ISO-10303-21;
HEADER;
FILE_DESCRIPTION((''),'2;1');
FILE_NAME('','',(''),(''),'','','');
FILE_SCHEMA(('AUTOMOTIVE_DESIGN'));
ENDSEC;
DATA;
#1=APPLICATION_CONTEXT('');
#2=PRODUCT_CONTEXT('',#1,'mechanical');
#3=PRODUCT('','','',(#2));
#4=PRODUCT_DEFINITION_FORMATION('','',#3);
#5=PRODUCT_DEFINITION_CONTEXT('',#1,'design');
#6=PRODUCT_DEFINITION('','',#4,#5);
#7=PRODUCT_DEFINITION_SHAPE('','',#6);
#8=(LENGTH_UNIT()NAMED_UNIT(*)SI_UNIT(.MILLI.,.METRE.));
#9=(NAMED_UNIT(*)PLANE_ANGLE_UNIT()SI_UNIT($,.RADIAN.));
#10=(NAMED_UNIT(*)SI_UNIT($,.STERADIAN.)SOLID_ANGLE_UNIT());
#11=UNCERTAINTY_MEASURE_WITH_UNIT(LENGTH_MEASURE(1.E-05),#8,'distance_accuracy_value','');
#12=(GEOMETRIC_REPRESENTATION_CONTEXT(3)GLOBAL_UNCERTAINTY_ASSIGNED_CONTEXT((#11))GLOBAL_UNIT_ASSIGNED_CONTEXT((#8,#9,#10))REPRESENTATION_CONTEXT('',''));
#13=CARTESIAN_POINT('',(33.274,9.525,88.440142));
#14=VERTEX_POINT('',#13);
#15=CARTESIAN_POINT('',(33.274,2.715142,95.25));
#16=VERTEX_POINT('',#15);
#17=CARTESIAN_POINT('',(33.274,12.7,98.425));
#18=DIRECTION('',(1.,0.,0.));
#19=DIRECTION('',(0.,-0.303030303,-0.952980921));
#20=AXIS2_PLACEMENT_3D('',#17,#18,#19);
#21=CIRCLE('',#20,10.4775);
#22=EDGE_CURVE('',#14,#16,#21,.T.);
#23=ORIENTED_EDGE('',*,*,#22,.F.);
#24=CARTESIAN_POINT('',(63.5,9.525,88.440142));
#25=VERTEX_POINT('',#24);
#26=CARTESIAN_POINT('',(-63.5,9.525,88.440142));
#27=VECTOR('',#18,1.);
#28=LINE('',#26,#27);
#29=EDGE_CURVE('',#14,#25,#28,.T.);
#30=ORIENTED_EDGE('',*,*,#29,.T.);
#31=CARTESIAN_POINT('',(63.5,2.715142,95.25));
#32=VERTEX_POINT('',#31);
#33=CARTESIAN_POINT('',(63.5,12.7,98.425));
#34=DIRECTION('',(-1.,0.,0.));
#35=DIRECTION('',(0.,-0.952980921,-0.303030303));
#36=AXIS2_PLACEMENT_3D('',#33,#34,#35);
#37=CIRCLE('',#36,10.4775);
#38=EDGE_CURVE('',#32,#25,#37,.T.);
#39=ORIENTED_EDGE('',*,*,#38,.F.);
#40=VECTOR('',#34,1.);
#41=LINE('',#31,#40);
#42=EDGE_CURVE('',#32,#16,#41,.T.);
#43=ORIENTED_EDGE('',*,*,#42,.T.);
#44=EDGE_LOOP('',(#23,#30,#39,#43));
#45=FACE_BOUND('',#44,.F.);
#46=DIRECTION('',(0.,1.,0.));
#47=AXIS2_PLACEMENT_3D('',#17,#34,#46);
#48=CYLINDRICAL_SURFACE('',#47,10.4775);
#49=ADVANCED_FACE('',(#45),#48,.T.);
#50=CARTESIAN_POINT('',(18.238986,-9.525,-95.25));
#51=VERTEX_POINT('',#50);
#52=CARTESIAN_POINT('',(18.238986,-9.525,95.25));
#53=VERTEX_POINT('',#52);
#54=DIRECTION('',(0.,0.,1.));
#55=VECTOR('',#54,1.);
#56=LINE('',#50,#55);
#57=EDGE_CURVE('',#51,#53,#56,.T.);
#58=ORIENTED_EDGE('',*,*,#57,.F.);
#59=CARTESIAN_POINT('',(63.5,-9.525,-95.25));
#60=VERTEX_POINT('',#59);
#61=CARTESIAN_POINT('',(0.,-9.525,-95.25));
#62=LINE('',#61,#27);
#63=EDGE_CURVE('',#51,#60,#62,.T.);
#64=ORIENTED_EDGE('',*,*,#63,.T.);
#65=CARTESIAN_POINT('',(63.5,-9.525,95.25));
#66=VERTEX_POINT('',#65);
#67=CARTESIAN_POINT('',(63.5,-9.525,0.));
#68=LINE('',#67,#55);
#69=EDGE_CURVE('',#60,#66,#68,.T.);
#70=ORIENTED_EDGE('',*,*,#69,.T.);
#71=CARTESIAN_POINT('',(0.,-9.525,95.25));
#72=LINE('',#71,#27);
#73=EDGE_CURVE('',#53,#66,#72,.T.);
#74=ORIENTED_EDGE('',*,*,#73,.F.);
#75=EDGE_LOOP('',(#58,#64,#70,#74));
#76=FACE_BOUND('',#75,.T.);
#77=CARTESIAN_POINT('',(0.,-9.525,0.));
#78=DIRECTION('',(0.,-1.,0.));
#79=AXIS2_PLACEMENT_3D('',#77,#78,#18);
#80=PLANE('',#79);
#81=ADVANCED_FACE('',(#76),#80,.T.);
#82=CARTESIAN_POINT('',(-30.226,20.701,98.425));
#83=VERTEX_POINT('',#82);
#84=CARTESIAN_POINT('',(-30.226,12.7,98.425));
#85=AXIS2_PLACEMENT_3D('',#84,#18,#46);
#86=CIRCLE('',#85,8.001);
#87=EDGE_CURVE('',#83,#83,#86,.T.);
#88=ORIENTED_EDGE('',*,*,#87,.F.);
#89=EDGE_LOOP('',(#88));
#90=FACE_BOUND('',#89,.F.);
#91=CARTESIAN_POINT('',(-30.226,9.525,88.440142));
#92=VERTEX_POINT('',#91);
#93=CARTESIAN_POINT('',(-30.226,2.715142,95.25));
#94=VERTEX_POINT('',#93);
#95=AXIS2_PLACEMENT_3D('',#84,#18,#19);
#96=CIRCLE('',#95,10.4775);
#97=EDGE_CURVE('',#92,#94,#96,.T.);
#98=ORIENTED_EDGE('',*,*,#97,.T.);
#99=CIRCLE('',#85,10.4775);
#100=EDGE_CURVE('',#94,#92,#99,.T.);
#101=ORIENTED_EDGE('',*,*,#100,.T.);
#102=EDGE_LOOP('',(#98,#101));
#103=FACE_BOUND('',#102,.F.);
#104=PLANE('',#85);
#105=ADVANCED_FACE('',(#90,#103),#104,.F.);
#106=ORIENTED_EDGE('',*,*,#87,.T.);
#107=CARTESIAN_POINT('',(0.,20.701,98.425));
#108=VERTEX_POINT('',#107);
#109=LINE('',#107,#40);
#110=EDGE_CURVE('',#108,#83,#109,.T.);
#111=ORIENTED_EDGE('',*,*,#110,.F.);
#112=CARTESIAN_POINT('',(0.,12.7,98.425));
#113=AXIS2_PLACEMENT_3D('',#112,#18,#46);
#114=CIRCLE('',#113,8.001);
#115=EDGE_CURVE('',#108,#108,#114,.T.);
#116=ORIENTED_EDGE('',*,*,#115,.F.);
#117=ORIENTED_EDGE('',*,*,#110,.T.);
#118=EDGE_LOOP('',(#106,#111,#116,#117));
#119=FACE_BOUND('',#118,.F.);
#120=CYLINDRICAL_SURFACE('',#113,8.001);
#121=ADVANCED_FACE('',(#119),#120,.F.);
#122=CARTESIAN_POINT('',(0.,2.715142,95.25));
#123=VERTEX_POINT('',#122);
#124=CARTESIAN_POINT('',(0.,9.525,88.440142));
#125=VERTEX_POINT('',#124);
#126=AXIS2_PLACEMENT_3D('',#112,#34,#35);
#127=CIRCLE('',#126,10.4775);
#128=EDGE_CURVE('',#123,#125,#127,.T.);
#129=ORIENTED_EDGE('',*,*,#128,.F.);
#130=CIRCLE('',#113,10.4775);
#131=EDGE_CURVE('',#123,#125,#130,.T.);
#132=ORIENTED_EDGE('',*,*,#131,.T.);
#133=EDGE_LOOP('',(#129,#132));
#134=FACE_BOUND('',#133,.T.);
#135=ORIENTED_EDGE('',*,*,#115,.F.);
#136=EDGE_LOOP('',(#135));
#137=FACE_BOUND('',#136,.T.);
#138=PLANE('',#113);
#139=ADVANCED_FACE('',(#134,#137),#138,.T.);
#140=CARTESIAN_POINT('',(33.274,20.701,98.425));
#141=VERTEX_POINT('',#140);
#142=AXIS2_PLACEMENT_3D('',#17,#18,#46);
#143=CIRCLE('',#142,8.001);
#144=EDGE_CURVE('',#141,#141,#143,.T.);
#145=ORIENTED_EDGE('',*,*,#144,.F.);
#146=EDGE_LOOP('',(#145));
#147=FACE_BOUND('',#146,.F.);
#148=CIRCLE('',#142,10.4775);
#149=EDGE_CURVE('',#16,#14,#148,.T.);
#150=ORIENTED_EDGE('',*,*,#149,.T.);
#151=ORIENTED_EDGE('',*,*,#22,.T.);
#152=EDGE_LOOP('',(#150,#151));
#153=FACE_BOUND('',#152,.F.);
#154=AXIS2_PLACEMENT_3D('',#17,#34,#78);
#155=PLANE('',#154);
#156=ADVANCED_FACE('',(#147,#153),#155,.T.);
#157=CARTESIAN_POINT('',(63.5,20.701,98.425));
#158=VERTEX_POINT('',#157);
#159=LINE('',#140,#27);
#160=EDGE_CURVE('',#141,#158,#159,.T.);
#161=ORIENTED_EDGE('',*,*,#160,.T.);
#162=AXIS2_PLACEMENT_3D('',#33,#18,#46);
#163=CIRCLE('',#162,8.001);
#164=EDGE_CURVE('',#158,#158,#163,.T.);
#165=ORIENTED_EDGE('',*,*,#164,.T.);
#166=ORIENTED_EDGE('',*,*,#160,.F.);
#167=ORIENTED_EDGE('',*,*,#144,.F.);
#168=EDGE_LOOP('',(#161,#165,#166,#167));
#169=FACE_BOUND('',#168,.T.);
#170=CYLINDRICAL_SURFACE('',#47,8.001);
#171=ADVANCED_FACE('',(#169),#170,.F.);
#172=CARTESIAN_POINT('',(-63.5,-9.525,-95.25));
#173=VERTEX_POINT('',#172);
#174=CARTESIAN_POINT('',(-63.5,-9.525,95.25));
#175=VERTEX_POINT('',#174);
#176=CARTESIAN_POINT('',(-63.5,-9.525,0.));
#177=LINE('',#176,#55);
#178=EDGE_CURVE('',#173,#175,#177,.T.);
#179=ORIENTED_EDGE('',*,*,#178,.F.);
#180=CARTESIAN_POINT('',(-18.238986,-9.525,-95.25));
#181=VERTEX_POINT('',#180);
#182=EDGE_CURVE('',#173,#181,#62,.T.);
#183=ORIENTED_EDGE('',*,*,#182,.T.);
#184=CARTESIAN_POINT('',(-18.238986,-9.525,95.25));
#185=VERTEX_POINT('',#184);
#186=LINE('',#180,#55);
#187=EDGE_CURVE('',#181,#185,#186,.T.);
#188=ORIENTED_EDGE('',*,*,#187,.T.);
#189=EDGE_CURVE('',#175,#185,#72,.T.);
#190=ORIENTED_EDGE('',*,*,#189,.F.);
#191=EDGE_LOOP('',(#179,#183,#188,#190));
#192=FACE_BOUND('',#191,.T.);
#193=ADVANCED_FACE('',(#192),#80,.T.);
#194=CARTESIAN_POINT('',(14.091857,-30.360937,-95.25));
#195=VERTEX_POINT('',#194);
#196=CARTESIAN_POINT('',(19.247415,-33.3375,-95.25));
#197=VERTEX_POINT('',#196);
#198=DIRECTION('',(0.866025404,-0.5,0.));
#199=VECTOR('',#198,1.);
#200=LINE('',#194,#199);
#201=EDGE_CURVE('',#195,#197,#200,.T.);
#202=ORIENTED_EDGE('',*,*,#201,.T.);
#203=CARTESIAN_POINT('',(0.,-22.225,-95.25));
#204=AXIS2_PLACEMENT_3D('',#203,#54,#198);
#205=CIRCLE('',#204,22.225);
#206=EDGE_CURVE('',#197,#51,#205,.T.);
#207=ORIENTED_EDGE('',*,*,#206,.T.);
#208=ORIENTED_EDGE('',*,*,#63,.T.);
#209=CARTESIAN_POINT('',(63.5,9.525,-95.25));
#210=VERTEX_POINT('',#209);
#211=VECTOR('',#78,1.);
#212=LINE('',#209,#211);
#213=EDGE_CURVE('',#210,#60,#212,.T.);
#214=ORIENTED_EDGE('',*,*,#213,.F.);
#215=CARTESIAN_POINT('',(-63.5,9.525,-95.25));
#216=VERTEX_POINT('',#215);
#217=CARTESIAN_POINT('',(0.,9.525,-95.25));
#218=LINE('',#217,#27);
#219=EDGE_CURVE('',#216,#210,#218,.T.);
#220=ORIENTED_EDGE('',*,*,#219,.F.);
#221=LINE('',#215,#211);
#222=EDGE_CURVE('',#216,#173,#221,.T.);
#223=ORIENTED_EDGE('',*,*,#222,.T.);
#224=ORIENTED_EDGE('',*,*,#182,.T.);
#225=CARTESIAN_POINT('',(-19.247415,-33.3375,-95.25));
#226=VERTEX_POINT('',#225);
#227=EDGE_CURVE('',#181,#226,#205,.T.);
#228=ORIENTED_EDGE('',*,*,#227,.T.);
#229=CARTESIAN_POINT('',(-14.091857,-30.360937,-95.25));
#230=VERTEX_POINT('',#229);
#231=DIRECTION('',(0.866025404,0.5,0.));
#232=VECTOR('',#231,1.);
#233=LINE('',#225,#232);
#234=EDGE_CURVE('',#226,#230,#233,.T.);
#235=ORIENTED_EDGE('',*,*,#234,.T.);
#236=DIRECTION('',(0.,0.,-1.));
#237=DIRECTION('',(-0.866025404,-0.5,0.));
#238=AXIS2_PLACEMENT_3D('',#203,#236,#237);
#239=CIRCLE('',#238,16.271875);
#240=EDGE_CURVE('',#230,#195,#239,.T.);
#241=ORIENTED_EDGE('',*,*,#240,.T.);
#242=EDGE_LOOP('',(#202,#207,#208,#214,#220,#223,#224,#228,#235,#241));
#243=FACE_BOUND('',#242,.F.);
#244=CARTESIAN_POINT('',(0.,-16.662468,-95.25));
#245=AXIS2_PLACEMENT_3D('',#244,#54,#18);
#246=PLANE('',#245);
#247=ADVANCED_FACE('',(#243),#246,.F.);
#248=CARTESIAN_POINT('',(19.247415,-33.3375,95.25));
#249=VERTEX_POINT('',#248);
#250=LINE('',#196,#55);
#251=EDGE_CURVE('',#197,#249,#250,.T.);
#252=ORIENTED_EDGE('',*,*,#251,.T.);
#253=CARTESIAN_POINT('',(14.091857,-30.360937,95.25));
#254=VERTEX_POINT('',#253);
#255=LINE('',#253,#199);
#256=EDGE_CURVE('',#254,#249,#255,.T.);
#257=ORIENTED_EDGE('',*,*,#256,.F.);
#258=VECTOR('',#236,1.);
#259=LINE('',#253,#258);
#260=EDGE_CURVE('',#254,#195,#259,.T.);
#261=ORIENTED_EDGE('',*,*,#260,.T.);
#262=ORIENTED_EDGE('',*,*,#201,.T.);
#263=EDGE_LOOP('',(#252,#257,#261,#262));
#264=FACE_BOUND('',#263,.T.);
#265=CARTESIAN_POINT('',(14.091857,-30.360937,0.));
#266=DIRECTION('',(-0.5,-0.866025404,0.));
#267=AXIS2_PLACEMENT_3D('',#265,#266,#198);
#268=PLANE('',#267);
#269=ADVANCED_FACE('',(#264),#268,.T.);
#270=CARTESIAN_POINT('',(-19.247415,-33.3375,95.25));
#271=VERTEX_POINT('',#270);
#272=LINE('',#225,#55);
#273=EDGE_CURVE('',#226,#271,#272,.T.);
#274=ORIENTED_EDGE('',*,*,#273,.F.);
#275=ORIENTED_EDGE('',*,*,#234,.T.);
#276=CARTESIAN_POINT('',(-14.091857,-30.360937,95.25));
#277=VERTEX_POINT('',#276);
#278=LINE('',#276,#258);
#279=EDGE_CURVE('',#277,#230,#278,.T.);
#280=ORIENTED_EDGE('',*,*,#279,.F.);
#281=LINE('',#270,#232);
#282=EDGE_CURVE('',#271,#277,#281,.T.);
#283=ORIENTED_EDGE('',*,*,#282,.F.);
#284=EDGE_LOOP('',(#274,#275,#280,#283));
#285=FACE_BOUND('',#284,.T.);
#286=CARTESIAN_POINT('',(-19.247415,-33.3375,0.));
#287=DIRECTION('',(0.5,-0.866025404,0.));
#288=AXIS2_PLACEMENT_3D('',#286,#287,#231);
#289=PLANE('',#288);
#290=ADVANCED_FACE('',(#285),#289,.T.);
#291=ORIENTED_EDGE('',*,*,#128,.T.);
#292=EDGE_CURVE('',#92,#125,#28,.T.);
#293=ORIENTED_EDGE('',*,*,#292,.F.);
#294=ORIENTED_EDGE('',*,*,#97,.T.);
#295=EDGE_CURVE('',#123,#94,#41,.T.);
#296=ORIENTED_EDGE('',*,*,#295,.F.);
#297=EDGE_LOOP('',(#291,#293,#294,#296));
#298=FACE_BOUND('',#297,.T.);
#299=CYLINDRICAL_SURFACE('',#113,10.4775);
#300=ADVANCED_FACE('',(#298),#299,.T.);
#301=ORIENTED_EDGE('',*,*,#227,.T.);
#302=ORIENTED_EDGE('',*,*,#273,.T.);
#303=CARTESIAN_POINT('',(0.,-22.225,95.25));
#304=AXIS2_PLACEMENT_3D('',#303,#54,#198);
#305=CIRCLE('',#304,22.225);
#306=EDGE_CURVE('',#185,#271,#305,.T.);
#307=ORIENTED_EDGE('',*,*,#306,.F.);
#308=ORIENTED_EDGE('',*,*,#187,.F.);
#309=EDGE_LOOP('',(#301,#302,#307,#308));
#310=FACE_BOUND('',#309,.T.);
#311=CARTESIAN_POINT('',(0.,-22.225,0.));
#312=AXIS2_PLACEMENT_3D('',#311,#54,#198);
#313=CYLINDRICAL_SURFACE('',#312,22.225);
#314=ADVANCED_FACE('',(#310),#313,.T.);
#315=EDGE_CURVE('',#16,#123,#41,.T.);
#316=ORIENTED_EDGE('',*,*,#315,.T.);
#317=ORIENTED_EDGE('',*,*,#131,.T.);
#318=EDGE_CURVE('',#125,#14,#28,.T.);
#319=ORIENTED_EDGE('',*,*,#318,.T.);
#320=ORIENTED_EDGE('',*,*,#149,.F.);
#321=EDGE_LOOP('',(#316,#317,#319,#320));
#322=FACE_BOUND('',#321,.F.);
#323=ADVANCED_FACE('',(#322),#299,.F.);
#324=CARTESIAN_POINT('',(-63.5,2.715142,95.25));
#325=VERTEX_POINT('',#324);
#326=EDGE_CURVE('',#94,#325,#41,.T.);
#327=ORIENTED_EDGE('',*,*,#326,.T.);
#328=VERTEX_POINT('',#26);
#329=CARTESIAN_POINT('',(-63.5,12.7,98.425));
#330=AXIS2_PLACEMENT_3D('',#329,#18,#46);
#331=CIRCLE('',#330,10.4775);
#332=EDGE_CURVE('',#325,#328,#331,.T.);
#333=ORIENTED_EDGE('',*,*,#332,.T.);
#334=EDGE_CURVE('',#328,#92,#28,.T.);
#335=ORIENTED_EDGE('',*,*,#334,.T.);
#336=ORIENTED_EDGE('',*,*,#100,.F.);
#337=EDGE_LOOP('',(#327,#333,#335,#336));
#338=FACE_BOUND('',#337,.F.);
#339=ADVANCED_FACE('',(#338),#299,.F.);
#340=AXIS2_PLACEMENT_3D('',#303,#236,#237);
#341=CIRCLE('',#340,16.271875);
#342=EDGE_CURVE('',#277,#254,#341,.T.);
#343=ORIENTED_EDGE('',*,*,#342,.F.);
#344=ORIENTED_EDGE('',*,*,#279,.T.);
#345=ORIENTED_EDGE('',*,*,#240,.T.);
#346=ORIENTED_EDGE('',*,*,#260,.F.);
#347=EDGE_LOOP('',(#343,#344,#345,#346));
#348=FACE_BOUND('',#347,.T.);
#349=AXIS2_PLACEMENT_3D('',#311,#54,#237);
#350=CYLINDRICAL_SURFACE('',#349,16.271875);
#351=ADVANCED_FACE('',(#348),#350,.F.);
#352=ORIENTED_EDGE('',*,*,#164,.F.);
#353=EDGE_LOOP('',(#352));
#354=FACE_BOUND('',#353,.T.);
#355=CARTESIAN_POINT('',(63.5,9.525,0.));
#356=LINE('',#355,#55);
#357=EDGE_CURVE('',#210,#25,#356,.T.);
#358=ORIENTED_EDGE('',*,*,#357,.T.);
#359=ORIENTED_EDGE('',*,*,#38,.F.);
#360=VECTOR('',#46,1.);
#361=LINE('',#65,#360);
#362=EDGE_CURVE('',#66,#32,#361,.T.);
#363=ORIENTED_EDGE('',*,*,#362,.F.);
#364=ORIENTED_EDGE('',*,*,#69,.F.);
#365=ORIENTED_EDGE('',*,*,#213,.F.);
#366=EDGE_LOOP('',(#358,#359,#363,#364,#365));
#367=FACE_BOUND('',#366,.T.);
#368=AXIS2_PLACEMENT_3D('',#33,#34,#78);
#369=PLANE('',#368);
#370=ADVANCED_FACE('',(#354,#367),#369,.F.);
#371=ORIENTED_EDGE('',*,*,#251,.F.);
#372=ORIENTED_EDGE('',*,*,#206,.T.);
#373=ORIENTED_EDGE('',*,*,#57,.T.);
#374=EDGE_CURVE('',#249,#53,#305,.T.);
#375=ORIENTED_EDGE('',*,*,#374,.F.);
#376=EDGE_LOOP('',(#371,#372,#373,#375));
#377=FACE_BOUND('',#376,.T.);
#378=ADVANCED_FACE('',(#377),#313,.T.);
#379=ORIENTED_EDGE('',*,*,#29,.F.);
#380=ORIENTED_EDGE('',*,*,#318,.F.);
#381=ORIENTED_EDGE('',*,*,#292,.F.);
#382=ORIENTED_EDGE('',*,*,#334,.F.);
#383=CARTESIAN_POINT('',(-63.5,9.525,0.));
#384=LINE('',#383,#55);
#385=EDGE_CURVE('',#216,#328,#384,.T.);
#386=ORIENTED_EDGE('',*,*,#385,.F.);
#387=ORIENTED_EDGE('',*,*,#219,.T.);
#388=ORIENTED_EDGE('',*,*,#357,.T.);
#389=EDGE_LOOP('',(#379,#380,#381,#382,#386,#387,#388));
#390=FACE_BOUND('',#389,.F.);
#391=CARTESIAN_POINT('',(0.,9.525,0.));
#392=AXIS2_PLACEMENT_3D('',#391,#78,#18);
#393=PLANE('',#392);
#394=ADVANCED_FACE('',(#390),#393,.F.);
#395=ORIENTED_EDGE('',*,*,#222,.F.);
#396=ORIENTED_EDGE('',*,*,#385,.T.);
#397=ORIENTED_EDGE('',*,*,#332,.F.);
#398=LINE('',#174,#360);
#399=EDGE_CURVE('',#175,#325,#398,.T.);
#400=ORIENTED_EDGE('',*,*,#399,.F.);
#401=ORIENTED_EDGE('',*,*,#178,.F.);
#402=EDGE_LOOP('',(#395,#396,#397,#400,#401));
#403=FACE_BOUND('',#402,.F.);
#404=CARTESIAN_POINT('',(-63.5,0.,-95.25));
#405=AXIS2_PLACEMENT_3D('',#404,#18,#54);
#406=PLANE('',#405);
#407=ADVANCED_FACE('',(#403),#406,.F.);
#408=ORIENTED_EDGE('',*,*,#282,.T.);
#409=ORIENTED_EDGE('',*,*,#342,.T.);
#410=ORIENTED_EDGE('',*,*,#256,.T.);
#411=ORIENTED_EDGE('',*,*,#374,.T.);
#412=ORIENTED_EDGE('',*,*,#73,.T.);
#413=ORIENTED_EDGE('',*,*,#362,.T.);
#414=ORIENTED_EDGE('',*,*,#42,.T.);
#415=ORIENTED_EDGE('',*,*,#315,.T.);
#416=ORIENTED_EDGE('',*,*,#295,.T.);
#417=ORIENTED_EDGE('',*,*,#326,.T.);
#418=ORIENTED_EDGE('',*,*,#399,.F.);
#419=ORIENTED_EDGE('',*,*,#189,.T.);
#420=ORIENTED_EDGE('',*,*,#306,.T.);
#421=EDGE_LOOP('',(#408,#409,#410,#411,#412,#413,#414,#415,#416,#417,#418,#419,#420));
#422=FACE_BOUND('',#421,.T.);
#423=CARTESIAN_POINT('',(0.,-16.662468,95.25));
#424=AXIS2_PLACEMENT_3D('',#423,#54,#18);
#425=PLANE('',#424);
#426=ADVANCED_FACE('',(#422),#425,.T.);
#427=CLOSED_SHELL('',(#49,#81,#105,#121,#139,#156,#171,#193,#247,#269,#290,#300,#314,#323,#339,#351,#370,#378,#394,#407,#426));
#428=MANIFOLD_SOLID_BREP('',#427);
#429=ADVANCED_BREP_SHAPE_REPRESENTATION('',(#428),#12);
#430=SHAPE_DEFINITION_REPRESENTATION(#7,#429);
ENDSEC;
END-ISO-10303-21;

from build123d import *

# Parameters (mm, degrees)
F0_W          = 127
F0_H          = 190.5
F1_DEPTH      = 9.525
F3_DEPTH      = 95.251
F3_DEPTH_BACK = 95.251
F4_DEPTH      = 95.25
F5_R          = 10.4775
F5_R_2        = 8.001
F6_DEPTH      = 63.501
F6_DEPTH_BACK = 63.501
F7_DEPTH      = 30.226
F8_R          = 10.4775
F8_R_2        = 8.001
F9_DEPTH      = 30.226


# Not quite as in the source:
# - a pattern or mirror of a feature is missing from the dataset's text; its kind, count and spacing are read off the source's solid


with BuildPart() as f1:
    # F0 (on Front) → F1 (new body, symmetric)
    with BuildSketch(Plane.XZ):
        Rectangle(F0_W, F0_H)
    extrude(amount=F1_DEPTH, both=True)

    # F2 (on Top) → F3 (cut, two sides)
    with BuildSketch(Plane.XY) as f3_sk:
        with BuildLine():
            Line((14.0918571172, -30.3609375), (19.2474145991, -33.3375))
            ThreePointArc((19.2474145991, -33.3375), (0, 0), (-19.2474145991, -33.3375))
            Line((-19.2474145991, -33.3375), (-14.0918571172, -30.3609375))
            ThreePointArc((-14.0918571172, -30.3609375), (0, -5.953125), (14.0918571172, -30.3609375))
        make_face()
        with BuildLine():
            Line((0, -22.225), (14.0918571172, -30.3609375))
            ThreePointArc((14.0918571172, -30.3609375), (0, -5.953125), (-14.0918571172, -30.3609375))
            Line((-14.0918571172, -30.3609375), (0, -22.225))
        make_face()
    extrude(amount=F3_DEPTH, mode=Mode.SUBTRACT)
    extrude(f3_sk.sketch, amount=-F3_DEPTH_BACK, mode=Mode.SUBTRACT)

    # F2 (on Top) → F4 (join, symmetric)
    with BuildSketch(Plane.XY):
        with BuildLine():
            Line((14.0918571172, -30.3609375), (19.2474145991, -33.3375))
            ThreePointArc((19.2474145991, -33.3375), (0, 0), (-19.2474145991, -33.3375))
            Line((-19.2474145991, -33.3375), (-14.0918571172, -30.3609375))
            ThreePointArc((-14.0918571172, -30.3609375), (0, -5.953125), (14.0918571172, -30.3609375))
        make_face()
    extrude(amount=F4_DEPTH, both=True)

    # F5 (on Right) → F6 (cut, two sides)
    with BuildSketch(Plane.YZ) as f6_sk:
        with Locations((12.7, 98.425)):
            Circle(F5_R)
        with Locations((12.7, 98.425)):
            Circle(F5_R_2, mode=Mode.SUBTRACT)
        with Locations((12.7, 98.425)):
            Circle(F5_R_2)
    extrude(amount=-F6_DEPTH, mode=Mode.SUBTRACT)
    extrude(f6_sk.sketch, amount=F6_DEPTH_BACK, mode=Mode.SUBTRACT)

    # F5 (on Right) → F7 (join)
    with BuildSketch(Plane.YZ):
        with Locations((12.7, 98.425)):
            Circle(F5_R)
        with Locations((12.7, 98.425)):
            Circle(F5_R_2, mode=Mode.SUBTRACT)
    f7 = extrude(amount=-F7_DEPTH)

    # F7_copies: F7 across plane
    add(f7.mirror(Plane(origin=(16.637, 0, 0), x_dir=(0, 0, 1), z_dir=(1, 0, 0))))

    # F8 (on face) → F9 (join)
    with BuildSketch(Plane.YZ):
        with Locations((12.7, 98.425)):
            Circle(F8_R)
        with Locations((12.7, 98.425)):
            Circle(F8_R_2, mode=Mode.SUBTRACT)
    extrude(amount=-F9_DEPTH)


solid = f1.part
